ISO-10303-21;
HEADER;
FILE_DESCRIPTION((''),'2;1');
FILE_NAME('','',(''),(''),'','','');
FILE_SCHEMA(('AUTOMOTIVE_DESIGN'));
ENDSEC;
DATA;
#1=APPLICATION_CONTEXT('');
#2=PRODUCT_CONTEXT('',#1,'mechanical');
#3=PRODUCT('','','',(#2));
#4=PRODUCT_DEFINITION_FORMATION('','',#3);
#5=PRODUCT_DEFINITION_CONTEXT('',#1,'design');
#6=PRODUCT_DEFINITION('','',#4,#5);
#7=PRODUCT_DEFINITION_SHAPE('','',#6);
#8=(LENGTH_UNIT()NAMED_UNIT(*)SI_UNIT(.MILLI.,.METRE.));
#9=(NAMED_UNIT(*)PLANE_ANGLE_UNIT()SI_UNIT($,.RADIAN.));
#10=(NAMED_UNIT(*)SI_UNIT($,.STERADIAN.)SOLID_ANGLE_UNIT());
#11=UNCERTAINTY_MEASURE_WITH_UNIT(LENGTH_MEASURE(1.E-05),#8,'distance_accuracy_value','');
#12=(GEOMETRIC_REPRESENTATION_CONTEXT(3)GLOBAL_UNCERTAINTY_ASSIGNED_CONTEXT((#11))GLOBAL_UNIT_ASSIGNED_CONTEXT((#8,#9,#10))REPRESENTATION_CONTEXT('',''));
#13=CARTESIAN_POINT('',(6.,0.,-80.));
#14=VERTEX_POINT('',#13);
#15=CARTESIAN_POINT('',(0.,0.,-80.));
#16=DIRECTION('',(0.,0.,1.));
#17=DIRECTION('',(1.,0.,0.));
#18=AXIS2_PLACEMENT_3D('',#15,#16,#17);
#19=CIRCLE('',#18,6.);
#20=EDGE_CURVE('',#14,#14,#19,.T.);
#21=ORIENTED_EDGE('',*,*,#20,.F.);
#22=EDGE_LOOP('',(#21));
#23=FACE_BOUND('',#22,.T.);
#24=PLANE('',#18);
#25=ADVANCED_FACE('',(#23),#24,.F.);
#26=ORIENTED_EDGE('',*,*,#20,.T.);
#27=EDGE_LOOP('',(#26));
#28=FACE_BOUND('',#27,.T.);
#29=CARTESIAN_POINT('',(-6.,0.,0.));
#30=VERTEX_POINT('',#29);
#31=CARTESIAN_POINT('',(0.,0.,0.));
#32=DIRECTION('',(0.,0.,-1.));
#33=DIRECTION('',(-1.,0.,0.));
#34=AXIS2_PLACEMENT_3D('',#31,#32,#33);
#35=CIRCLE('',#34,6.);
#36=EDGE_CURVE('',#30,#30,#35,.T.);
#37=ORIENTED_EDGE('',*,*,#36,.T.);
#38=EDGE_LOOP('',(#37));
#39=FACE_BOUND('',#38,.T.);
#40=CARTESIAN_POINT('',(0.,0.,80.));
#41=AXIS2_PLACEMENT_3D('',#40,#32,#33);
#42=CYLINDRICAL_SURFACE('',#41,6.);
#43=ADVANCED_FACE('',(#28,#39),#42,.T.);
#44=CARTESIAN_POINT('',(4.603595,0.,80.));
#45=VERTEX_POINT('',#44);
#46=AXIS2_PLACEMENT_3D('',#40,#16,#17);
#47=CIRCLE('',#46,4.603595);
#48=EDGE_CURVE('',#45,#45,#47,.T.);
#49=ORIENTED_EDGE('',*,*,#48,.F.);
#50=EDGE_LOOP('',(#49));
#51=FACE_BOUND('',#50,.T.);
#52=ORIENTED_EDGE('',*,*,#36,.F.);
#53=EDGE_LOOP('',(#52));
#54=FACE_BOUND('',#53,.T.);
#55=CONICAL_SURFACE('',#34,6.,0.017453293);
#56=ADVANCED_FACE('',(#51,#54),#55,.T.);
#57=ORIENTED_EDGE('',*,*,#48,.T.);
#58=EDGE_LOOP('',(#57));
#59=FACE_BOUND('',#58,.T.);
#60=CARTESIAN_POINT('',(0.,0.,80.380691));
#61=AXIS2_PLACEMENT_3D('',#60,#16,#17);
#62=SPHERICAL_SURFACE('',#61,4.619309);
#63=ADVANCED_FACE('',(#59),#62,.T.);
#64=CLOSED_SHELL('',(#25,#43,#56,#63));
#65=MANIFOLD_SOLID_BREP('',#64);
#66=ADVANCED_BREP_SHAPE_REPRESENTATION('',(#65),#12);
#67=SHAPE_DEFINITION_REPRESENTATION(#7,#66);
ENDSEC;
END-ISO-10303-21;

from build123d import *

# Parameters (mm, degrees)
SKETCH_1_R         = 6
EXTRUDE_2_DEPTH    = 80
DOME_1_FACE_RADIUS = 4.603594806
DOME_1_HEIGHT      = 5


# Read off the part's stored shape, not the designer's step: 拔模2
with BuildPart() as part:
    # 草图1 → 凸台-拉伸2 (new, symmetric)
    with BuildSketch(Plane.XY):
        Circle(SKETCH_1_R)
    extrude(amount=EXTRUDE_2_DEPTH, both=True)

    # 拔模2 outline → 拔模2 (revolve, cut)
    with BuildSketch(Plane.XZ):
        Polygon((6, 80), (4.603594806, 80), (6, 0), align=None)
    revolve(axis=Axis((0, 0, 0), (0, 0, 1)), mode=Mode.SUBTRACT)

    # 圆顶1: a dome of height H over a round flat face of radius A is a cap of a sphere of radius (A * A + H * H) / (2 * H)
    dome_1_r = (DOME_1_FACE_RADIUS * DOME_1_FACE_RADIUS + DOME_1_HEIGHT * DOME_1_HEIGHT) / (2 * DOME_1_HEIGHT)
    dome_1_base = Plane((0, 0, 80), z_dir=(0, 0, 1))
    with Locations(dome_1_base.offset(DOME_1_HEIGHT - dome_1_r)):
        dome_1_ball = Sphere(dome_1_r, mode=Mode.PRIVATE)
    add(split(dome_1_ball, bisect_by=dome_1_base, keep=Keep.TOP, mode=Mode.PRIVATE))


solid = part.part
